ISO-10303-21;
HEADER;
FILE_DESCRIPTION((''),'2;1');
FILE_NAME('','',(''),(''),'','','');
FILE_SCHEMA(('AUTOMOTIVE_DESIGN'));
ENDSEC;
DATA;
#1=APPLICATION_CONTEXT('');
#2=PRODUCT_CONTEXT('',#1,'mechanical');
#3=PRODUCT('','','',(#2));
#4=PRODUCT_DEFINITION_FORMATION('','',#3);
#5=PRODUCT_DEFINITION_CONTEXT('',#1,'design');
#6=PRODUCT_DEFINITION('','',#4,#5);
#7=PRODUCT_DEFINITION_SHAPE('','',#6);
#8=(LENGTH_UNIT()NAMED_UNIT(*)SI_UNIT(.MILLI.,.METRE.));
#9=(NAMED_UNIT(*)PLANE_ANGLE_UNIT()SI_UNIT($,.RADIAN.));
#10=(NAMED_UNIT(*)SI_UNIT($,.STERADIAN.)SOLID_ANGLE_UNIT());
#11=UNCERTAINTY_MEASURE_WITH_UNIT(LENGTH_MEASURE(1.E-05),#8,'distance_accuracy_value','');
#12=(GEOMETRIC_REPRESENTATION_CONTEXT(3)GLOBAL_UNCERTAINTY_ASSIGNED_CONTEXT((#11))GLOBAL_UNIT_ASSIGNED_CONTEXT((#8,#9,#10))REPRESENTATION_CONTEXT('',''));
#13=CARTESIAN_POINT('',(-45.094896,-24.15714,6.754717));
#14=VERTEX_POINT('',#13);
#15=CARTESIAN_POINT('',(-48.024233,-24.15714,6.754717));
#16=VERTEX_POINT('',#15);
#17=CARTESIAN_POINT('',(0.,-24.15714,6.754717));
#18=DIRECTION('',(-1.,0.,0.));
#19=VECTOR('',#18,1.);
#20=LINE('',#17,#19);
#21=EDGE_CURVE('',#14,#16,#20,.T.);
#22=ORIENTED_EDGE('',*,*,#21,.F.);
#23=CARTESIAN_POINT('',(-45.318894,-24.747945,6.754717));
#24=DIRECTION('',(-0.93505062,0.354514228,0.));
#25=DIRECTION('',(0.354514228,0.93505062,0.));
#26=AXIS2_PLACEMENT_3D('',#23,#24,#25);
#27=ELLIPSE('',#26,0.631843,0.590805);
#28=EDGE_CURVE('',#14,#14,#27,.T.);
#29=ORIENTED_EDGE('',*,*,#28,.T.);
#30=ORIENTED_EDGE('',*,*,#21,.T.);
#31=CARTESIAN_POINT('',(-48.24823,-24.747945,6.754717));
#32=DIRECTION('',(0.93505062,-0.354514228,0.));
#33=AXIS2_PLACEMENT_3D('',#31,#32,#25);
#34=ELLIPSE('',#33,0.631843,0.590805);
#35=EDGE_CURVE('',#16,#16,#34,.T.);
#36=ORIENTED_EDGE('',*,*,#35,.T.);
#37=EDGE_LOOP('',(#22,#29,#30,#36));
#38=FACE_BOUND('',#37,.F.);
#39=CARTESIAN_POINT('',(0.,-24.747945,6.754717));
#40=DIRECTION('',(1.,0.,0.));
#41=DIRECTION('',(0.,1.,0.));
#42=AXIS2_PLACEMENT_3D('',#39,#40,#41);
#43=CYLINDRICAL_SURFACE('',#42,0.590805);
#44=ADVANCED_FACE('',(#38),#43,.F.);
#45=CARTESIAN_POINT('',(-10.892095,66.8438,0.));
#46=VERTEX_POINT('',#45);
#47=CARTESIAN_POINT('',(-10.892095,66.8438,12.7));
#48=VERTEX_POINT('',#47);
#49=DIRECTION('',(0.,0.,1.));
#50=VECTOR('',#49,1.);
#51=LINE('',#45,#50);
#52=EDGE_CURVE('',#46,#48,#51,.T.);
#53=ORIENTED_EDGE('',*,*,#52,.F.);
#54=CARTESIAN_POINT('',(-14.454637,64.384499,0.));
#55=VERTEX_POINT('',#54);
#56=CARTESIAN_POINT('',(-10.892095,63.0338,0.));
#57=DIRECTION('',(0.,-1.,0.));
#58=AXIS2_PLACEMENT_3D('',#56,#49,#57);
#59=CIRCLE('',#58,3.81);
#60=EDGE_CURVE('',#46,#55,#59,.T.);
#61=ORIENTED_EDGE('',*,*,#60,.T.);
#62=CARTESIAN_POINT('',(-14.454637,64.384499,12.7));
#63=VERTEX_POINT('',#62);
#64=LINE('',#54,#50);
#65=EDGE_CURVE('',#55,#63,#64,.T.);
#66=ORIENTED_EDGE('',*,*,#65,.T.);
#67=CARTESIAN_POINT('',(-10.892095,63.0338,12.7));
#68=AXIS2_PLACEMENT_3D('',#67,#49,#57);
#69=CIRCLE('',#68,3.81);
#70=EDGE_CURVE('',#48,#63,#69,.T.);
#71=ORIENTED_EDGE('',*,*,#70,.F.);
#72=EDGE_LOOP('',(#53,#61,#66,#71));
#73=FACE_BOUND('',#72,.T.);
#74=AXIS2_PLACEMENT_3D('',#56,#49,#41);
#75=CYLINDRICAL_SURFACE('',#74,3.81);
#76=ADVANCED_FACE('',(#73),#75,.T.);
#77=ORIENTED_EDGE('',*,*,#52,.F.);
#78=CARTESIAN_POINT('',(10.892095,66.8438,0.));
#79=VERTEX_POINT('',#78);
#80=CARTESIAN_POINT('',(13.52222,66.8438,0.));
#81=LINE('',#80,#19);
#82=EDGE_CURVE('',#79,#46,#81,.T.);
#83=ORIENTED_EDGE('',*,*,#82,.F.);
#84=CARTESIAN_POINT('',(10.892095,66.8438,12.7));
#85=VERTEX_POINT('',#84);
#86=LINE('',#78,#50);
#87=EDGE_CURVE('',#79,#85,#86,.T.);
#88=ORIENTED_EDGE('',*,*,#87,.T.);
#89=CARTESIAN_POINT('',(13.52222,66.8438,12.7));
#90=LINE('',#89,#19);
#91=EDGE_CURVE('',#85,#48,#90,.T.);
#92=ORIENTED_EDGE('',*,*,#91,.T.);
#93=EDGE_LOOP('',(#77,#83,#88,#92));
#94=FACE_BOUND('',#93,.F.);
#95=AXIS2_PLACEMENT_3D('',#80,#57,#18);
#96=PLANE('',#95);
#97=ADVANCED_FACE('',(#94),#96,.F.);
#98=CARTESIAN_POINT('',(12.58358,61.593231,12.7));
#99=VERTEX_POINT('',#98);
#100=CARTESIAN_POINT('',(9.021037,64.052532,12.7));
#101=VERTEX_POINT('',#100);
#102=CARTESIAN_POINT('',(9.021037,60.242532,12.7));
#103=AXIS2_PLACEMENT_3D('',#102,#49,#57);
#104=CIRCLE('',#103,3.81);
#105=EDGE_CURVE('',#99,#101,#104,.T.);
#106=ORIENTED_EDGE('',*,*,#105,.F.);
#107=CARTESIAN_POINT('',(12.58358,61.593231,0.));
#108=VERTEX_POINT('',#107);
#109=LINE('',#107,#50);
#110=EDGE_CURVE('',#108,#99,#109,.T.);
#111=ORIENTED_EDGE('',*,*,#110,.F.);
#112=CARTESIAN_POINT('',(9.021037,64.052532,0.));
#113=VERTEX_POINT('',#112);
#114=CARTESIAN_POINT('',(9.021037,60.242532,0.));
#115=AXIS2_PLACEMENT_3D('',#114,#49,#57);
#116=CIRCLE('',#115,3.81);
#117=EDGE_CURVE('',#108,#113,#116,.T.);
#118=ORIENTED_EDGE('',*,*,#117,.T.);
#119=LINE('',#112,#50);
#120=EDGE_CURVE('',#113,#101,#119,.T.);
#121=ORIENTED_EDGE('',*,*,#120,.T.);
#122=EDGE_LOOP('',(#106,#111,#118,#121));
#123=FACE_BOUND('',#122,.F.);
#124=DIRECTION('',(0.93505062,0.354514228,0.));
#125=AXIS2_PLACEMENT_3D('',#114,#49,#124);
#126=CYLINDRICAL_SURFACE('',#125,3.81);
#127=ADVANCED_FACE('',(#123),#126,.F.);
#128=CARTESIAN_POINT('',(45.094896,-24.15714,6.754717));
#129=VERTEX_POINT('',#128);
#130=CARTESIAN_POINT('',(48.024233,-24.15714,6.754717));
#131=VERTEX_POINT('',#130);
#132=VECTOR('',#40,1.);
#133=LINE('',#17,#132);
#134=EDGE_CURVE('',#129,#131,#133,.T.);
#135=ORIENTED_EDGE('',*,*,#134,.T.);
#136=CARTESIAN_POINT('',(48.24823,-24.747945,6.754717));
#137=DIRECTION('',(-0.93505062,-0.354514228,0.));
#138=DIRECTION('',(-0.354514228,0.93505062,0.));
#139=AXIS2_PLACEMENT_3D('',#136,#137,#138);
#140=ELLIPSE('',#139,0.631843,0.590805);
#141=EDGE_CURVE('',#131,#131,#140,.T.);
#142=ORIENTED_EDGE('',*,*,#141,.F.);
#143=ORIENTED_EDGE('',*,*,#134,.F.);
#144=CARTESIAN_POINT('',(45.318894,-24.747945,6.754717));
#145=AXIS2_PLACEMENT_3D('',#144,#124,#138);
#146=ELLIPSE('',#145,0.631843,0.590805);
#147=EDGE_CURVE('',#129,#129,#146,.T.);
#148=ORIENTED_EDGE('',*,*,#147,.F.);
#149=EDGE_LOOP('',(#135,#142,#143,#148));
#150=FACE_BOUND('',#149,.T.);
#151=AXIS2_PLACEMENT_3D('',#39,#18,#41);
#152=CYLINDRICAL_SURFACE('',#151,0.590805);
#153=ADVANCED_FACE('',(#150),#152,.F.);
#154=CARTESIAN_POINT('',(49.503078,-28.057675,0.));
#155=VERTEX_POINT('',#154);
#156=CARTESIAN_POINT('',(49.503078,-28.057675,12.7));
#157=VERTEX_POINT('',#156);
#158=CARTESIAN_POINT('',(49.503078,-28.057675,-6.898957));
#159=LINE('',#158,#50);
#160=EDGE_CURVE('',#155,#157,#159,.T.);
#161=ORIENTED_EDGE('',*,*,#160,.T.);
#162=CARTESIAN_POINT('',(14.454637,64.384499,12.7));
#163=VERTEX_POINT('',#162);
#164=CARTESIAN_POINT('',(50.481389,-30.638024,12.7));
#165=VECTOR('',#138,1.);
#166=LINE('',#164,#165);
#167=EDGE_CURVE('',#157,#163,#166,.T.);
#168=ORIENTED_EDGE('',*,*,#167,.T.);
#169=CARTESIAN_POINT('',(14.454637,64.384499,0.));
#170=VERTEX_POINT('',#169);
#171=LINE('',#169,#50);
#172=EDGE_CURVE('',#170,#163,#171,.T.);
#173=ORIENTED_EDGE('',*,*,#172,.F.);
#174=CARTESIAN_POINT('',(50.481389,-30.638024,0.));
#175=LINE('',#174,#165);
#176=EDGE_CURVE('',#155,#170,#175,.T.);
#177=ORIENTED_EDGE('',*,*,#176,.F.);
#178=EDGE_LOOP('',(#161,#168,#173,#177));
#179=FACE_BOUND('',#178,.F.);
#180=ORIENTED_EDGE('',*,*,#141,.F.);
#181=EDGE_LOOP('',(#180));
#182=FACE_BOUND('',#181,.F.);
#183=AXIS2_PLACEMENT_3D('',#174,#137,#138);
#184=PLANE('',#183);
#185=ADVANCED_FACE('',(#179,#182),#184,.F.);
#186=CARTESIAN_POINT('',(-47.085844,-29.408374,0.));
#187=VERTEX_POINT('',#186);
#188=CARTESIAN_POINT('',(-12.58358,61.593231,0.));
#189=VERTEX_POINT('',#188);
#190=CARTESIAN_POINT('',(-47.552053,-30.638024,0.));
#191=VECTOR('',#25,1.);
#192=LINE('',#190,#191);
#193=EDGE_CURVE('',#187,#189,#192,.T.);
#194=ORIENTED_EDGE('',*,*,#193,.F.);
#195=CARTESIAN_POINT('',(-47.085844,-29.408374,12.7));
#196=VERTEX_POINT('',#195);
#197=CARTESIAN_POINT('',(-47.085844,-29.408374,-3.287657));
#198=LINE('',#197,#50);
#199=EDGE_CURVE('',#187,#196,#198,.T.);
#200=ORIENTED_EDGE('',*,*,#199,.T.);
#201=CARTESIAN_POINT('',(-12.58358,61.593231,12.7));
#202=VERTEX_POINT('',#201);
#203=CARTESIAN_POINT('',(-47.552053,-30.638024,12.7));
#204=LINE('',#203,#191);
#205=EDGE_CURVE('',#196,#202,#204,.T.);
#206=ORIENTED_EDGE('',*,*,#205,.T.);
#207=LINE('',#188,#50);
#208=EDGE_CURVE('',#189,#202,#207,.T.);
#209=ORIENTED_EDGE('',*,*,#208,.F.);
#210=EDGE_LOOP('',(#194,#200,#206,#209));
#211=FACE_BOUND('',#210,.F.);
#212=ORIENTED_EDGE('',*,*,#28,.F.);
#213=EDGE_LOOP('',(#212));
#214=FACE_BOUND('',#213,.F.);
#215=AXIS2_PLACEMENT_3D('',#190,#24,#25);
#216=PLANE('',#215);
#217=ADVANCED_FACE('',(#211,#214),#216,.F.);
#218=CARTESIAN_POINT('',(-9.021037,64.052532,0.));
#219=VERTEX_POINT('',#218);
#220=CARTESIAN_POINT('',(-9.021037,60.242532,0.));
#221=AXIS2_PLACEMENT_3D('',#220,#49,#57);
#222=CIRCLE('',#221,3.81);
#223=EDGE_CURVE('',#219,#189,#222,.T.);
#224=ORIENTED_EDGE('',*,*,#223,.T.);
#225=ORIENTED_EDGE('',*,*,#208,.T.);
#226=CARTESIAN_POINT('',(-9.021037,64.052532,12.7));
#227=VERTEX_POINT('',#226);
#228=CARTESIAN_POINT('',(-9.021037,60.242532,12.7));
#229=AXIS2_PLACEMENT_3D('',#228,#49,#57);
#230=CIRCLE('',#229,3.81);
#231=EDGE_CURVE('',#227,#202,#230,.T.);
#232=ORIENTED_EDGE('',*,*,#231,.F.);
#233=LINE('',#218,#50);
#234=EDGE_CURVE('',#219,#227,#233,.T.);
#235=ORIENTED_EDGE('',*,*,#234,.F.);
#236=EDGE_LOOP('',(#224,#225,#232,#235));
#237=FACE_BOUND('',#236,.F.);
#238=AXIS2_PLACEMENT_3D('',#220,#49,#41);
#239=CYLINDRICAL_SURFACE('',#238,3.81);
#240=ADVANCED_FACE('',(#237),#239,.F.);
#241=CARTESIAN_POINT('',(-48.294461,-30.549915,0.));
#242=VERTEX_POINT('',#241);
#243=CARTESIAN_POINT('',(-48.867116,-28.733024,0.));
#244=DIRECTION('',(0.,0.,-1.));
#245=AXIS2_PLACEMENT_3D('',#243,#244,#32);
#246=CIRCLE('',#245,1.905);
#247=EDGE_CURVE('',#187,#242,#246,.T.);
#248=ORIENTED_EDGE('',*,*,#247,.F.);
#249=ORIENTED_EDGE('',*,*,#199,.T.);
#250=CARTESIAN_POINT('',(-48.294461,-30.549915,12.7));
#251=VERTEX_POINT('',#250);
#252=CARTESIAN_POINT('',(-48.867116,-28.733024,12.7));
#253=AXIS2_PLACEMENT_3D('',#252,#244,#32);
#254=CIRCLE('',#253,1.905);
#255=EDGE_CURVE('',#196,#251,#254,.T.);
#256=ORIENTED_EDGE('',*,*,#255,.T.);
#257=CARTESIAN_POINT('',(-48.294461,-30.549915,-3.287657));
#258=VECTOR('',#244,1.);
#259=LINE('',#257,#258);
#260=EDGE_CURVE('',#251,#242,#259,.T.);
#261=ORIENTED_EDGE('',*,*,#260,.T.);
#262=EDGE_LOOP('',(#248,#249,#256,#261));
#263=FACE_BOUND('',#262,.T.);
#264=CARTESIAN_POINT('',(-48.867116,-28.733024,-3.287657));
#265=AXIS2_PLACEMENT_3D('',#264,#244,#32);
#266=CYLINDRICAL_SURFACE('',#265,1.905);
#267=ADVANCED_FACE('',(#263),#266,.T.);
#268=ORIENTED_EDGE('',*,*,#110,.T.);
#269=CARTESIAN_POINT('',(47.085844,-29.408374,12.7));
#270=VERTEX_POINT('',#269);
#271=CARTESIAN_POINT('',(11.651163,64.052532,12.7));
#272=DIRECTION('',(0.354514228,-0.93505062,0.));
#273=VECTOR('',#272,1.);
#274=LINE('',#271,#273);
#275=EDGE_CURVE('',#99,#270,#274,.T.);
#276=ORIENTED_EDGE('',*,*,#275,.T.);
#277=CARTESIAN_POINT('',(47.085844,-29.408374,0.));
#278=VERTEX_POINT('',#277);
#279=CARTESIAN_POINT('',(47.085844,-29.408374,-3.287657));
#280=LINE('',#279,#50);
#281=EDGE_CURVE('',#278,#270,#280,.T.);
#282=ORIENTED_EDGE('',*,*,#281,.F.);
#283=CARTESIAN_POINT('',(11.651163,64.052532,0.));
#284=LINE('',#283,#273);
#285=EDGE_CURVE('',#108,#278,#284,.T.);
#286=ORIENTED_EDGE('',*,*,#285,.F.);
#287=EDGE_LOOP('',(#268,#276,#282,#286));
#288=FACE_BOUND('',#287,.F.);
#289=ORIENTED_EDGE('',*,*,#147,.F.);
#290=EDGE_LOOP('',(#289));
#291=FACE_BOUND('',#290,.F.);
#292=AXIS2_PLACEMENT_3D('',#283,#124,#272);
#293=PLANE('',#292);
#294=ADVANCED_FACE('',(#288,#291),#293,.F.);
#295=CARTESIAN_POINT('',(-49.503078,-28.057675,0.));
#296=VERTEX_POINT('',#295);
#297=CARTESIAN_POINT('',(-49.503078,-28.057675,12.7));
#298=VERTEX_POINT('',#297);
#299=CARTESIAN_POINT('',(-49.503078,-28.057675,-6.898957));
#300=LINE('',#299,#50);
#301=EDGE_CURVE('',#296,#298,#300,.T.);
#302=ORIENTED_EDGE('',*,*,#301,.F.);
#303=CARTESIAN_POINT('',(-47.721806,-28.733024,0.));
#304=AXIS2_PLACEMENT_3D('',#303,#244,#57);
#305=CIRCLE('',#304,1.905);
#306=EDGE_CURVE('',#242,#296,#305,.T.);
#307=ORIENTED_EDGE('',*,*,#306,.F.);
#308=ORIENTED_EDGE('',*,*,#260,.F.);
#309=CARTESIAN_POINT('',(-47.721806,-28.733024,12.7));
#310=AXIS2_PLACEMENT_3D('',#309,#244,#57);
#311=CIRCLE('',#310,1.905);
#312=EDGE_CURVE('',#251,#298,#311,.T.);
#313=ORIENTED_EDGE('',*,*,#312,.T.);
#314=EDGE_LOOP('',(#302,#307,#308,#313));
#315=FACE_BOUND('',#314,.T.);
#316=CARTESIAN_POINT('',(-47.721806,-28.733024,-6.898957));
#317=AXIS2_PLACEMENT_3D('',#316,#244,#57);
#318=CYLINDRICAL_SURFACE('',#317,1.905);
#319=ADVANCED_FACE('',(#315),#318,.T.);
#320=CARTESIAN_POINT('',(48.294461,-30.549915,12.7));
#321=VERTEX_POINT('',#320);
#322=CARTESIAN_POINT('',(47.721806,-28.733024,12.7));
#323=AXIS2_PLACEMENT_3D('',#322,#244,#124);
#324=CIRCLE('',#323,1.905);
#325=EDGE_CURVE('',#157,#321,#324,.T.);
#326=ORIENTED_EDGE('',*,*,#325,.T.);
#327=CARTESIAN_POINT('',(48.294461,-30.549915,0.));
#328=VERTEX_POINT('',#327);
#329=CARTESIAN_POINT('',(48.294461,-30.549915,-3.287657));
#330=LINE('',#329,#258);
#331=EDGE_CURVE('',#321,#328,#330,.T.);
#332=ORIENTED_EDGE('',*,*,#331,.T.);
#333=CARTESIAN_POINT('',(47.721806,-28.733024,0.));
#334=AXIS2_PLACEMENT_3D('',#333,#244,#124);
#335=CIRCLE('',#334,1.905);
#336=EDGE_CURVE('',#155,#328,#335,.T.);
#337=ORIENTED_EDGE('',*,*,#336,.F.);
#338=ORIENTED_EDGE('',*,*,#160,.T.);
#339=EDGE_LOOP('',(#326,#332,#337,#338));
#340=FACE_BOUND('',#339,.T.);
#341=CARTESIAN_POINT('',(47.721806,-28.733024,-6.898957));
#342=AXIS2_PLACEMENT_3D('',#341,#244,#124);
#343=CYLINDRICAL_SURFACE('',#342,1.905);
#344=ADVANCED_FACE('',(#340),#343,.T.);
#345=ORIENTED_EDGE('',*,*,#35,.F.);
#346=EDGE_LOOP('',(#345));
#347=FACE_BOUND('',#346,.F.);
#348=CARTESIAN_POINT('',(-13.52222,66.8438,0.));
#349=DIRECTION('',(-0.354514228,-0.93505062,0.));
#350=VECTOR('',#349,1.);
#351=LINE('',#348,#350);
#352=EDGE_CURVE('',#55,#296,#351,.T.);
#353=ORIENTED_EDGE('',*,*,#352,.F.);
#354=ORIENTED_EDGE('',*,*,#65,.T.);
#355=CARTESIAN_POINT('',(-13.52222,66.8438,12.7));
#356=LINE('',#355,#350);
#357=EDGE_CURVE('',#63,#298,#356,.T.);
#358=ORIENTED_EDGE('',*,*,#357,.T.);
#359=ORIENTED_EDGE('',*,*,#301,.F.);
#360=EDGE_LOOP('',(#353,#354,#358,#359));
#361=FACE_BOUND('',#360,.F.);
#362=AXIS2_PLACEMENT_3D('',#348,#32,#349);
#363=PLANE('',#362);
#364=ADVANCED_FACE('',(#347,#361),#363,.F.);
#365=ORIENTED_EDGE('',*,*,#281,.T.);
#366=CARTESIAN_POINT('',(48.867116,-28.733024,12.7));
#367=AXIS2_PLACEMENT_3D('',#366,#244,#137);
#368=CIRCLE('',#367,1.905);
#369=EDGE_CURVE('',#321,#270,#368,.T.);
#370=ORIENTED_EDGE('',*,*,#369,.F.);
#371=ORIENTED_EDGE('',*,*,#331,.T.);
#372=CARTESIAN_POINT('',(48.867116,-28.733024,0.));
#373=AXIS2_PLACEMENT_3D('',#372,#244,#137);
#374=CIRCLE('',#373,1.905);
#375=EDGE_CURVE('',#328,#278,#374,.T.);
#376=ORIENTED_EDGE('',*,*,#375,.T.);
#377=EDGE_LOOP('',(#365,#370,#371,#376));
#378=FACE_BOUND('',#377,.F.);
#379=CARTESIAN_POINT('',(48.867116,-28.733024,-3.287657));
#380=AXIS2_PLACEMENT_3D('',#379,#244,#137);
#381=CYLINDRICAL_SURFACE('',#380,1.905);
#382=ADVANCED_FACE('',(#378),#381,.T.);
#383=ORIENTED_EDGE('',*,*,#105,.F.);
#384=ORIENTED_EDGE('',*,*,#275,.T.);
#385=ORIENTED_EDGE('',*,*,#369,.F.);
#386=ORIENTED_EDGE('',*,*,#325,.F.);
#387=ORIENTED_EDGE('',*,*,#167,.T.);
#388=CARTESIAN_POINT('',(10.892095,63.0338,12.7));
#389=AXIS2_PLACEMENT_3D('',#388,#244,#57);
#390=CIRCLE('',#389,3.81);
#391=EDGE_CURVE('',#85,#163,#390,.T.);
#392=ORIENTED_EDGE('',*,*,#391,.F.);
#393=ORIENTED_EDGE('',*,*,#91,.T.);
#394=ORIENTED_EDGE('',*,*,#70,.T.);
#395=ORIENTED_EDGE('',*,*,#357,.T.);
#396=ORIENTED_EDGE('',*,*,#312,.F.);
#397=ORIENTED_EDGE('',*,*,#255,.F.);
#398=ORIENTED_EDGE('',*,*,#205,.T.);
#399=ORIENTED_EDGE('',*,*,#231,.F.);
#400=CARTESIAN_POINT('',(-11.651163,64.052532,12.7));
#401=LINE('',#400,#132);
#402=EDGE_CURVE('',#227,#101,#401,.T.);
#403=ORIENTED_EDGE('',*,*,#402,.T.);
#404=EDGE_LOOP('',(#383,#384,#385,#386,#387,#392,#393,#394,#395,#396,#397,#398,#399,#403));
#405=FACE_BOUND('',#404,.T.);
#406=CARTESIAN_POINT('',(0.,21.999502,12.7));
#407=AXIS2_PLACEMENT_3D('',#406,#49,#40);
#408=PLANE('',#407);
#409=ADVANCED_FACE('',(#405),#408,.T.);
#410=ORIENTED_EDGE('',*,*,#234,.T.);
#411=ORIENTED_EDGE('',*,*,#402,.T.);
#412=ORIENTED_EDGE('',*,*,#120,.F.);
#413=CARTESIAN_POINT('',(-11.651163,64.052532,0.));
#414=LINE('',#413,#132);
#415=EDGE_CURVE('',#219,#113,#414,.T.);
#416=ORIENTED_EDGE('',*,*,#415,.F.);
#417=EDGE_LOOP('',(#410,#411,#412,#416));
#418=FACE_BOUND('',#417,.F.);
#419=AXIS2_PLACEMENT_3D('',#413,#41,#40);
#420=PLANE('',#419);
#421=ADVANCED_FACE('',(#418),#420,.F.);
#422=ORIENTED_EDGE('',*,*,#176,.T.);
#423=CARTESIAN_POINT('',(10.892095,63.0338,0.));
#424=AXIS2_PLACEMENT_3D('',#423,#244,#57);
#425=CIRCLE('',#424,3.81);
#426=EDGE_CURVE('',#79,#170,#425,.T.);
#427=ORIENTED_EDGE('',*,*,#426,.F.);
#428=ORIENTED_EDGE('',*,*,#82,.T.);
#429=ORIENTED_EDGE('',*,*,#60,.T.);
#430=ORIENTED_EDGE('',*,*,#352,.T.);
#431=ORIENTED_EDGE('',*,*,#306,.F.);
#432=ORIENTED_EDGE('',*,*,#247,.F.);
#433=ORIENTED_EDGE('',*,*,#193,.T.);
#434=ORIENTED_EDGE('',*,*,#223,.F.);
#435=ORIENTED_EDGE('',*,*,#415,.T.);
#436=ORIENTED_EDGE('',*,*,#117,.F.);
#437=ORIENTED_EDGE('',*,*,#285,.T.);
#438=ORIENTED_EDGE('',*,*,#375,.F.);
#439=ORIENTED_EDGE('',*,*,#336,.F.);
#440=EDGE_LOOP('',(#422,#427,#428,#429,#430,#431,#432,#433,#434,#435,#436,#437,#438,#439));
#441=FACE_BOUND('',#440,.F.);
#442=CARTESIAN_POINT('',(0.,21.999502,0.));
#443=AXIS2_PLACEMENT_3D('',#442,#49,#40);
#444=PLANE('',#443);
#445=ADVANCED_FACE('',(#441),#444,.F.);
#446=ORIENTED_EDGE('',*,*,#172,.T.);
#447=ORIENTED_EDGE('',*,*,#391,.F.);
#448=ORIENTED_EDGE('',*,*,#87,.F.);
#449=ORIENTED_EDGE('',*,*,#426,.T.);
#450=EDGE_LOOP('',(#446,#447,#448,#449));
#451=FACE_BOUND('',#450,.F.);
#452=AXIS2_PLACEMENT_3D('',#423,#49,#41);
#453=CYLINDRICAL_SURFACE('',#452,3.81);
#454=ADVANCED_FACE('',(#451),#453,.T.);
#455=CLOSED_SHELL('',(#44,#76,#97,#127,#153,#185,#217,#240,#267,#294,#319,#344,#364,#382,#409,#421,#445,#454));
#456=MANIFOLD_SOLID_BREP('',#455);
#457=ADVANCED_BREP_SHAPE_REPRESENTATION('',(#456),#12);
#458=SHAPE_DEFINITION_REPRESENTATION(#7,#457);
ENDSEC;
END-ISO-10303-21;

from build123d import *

# Parameters (mm, degrees)
F1_DEPTH      = 12.7
F2_T1_DEPTH   = 19.2753145827
F2_T3_DEPTH   = 26.4979139795
F3_R          = 3.81
F4_R          = 0.5908054237
F5_DEPTH      = 57.15
F5_DEPTH_BACK = 73.914


# Not quite as in the source:
# - a fillet or chamfer that OpenCascade refuses, or shapes differently, is made with other operations: its cross-section is extruded or revolved along the edge and cut away or added


with BuildPart() as f1:
    # F0 (on Top) → F1 (new body)
    with BuildSketch(Plane.XY):
        Polygon((13.5222204362, 66.8438002467), (0, 66.8438002467), (-13.5222204362, 66.8438002467), (-50.4813892832, -30.6380242109), (-47.5520528853, -30.6380242109), (-11.6511627941, 64.052532285), (0, 64.052532285), (11.6511627941, 64.052532285), (47.5520528853, -30.6380242109), (50.4813892832, -30.6380242109), align=None)
    extrude(amount=F1_DEPTH)

    # F2: fillet of radius 1.905 on 4 edges, made by hand

    # F2_s2 → F2_t1 (cut)
    with BuildSketch(Plane.XY.offset(-3.2876572913)):
        with BuildLine():
            ThreePointArc((-47.0858443706, -29.4083738154), (-47.784876456, -30.3007560114), (-48.8671158018, -30.6380242109))
            Line((-48.8671158018, -30.6380242109), (-47.5520528853, -30.6380242109))
            Line((-47.5520528853, -30.6380242109), (-47.0858443706, -29.4083738154))
        make_face()
        with BuildLine():
            ThreePointArc((47.0858443706, -29.4083738154), (47.784876456, -30.3007560114), (48.8671158018, -30.6380242109))
            Line((48.8671158018, -30.6380242109), (47.5520528853, -30.6380242109))
            Line((47.5520528853, -30.6380242109), (47.0858443706, -29.4083738154))
        make_face()
    extrude(amount=F2_T1_DEPTH, mode=Mode.SUBTRACT)

    # F2_s4 → F2_t3 (cut)
    with BuildSketch(Plane.XY.offset(-6.8989569898)):
        with BuildLine():
            ThreePointArc((-47.7218064873, -30.6380242109), (-49.2895382878, -29.8152635568), (-49.5030779186, -28.0576746065))
            Line((-49.5030779186, -28.0576746065), (-50.4813892832, -30.6380242109))
            Line((-50.4813892832, -30.6380242109), (-47.7218064873, -30.6380242109))
        make_face()
        with BuildLine():
            ThreePointArc((49.5030779186, -28.0576746065), (49.2895382878, -29.8152635568), (47.7218064873, -30.6380242109))
            Line((47.7218064873, -30.6380242109), (50.4813892832, -30.6380242109))
            Line((50.4813892832, -30.6380242109), (49.5030779186, -28.0576746065))
        make_face()
    extrude(amount=F2_T3_DEPTH, mode=Mode.SUBTRACT)

    # F3
    f3_edges = [f1.edges().sort_by_distance(p)[0] for p in [
        (13.52222, 66.8438, 6.35),
        (-13.52222, 66.8438, 6.35),
        (-11.651163, 64.052532, 6.35),
        (11.651163, 64.052532, 6.35),
    ]]
    fillet(f3_edges, radius=F3_R)

    # F4 (on Right) → F5 (cut, two sides)
    with BuildSketch(Plane.YZ) as f5_sk:
        with Locations((-24.7479453683, 6.7547173239)):
            Circle(F4_R)
    extrude(amount=-F5_DEPTH, mode=Mode.SUBTRACT)
    extrude(f5_sk.sketch, amount=F5_DEPTH_BACK, mode=Mode.SUBTRACT)


solid = f1.part
